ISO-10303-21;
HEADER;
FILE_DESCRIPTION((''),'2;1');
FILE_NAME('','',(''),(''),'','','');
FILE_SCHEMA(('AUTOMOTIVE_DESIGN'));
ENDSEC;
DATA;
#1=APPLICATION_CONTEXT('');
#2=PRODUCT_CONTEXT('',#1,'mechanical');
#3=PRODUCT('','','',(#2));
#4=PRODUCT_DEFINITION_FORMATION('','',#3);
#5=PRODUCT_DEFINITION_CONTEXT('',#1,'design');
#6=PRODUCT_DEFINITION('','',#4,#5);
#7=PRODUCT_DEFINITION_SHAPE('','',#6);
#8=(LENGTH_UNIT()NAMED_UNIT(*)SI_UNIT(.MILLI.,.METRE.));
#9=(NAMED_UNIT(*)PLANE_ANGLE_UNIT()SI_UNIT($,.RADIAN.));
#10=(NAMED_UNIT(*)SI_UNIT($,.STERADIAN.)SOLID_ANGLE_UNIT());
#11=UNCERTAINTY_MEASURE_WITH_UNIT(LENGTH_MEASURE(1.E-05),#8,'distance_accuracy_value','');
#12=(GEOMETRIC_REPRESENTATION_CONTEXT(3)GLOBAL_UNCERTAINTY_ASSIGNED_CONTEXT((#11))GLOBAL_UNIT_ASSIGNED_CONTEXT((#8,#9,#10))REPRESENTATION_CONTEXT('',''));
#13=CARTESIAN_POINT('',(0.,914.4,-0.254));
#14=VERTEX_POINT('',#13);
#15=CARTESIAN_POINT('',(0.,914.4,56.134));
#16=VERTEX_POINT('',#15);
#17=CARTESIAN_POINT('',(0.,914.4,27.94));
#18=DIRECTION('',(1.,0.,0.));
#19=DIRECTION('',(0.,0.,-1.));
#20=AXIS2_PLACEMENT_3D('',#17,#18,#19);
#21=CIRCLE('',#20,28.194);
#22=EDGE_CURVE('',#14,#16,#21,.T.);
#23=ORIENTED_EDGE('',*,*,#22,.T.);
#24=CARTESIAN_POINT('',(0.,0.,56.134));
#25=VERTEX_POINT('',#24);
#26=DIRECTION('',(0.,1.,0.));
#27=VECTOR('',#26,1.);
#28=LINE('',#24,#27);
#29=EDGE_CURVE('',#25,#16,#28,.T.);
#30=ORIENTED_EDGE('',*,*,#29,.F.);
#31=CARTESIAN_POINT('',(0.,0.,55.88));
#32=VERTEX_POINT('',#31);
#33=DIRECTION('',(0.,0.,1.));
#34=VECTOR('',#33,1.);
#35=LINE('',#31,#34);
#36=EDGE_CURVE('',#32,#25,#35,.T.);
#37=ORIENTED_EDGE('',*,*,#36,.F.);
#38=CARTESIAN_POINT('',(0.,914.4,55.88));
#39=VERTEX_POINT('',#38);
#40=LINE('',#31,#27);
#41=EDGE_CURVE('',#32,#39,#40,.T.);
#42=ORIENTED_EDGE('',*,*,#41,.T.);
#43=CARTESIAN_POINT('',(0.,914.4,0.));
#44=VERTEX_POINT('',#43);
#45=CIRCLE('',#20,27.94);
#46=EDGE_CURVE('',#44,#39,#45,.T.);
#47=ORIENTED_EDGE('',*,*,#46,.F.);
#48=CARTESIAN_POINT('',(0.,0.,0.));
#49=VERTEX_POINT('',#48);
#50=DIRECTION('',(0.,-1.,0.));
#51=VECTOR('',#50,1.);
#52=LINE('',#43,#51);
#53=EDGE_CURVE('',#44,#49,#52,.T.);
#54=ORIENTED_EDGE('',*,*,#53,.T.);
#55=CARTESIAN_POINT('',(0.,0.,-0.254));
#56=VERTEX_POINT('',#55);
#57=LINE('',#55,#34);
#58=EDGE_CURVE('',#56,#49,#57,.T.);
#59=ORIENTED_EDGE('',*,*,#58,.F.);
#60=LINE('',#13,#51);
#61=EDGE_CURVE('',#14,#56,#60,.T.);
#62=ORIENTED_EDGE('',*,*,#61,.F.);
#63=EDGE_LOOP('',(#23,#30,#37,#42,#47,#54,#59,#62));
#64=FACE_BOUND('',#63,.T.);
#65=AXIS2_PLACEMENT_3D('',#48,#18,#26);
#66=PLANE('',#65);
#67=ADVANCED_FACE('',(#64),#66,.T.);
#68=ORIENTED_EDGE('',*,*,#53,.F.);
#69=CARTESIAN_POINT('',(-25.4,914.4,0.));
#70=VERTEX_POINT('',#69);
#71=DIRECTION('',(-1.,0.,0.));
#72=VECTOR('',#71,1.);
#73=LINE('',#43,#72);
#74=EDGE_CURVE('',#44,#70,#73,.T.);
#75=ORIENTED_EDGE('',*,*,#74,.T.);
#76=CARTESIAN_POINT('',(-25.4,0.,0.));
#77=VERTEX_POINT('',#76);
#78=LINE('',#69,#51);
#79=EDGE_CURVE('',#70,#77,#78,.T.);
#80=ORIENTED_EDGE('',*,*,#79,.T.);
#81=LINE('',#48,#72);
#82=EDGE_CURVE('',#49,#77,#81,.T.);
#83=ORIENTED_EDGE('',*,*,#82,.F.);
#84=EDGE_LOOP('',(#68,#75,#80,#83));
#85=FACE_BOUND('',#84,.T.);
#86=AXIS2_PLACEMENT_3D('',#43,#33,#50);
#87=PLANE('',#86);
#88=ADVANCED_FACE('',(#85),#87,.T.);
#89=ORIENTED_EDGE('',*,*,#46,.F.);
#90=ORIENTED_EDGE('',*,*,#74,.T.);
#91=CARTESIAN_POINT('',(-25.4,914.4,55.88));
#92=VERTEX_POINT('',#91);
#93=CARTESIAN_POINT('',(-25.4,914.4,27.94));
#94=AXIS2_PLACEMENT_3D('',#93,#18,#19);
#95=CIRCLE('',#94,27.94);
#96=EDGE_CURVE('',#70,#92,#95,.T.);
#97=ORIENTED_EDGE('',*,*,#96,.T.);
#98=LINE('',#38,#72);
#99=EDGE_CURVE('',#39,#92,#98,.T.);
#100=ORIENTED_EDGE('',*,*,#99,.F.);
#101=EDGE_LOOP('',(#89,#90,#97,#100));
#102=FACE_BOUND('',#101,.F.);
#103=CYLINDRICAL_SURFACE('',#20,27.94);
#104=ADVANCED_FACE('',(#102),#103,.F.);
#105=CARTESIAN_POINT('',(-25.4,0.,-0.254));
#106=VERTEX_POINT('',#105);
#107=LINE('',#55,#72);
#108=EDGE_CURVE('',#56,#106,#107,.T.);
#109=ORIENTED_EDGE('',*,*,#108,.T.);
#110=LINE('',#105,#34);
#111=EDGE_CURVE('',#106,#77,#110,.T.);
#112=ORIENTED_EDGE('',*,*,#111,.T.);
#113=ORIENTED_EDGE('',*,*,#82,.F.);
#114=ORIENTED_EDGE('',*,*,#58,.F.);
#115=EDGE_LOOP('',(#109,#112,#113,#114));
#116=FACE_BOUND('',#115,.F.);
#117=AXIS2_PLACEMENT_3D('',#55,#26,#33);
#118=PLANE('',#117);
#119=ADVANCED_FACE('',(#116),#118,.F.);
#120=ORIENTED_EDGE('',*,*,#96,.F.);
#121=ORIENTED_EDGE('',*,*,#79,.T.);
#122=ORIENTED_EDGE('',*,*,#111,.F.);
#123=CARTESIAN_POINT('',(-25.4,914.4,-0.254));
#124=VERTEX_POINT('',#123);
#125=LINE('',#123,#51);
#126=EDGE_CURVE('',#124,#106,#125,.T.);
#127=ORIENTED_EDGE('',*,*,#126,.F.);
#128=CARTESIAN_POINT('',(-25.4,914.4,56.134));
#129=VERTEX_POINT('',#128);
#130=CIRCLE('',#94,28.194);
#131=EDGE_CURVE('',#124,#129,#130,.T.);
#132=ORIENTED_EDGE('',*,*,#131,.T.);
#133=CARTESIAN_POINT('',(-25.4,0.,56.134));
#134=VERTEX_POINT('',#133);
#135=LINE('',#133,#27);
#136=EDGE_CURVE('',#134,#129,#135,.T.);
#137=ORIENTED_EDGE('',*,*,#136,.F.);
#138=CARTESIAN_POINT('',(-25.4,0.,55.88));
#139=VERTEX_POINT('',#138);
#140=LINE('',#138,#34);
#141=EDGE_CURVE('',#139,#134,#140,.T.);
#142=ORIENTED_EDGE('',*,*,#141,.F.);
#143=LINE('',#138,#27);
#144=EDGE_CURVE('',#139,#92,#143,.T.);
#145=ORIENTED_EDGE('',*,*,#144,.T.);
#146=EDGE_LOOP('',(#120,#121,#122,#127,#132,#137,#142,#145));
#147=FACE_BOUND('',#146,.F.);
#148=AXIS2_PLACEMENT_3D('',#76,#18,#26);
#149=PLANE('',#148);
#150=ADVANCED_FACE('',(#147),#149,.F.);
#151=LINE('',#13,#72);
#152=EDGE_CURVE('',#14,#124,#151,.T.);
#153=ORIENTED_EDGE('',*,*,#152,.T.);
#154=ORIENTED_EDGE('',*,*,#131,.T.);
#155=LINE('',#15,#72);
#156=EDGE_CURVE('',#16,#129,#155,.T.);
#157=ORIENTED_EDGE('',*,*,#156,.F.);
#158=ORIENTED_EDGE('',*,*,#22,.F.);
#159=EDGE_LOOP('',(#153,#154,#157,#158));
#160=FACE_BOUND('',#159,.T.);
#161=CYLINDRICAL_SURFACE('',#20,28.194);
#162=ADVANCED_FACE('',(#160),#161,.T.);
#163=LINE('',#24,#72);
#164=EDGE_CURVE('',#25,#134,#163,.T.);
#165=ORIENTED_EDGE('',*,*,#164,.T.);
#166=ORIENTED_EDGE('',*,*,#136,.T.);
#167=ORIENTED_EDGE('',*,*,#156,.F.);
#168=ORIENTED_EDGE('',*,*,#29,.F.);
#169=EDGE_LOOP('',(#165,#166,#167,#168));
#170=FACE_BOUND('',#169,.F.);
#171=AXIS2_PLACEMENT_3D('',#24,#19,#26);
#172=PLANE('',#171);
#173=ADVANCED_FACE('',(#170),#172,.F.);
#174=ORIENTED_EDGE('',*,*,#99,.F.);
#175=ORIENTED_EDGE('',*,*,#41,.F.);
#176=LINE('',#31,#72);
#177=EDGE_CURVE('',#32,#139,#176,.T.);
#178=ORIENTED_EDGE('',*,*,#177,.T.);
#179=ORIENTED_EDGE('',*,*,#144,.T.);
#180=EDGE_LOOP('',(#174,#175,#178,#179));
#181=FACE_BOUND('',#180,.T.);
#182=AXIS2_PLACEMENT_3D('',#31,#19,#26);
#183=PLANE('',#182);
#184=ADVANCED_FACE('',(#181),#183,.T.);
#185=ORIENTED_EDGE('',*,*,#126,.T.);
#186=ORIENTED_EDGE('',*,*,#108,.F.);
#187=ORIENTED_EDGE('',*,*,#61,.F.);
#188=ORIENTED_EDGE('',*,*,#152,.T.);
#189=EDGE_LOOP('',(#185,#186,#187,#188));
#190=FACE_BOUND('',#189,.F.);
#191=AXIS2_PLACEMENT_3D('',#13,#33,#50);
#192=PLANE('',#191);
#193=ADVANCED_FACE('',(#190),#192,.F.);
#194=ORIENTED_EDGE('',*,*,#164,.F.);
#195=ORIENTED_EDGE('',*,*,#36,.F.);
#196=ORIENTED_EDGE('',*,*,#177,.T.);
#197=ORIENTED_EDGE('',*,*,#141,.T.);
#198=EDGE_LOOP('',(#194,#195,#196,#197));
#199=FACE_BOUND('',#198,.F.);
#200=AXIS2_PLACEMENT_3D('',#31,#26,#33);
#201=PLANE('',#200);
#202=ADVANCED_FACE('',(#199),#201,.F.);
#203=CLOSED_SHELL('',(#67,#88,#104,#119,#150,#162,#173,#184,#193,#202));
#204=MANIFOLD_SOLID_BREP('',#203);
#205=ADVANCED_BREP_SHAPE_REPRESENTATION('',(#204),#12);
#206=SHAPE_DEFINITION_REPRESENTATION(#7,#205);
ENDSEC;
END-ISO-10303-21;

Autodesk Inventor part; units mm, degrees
ref_plane "YZ Plane" through (0, 0, 0) normal (1, 0, 0) x (0, 1, 0)
ref_plane "XZ Plane" through (0, 0, 0) normal (0, 1, 0) x (-1, 0, 0)
ref_plane "XY Plane" through (0, 0, 0) normal (0, 0, 1) x (1, 0, 0)
sketch "Sketch1" plane through (0, 0, 0) normal (1, 0, 0) x (0, 1, 0)
  line L0 (0, 55.88) -> (914.4, 55.88)
  arc A0 (914.4, 0) -> (914.4, 55.88) centre (914.4, 27.94) ccw
  line L1 (914.4, 0) -> (0, 0)
  line L2 (0, 56.134) -> (914.4, 56.134)
  arc A1 (914.4, -0.254) -> (914.4, 56.134) centre (914.4, 27.94) ccw
  line L3 (914.4, -0.254) -> (0, -0.254)
  line L4 (0, 55.88) -> (0, 56.134)
  line L5 (0, -0.254) -> (0, 0)
  dimension "d6" = 27.94
  dimension "d7" = 914.4
  dimension "d12" = 0.254
extrude "Extrusion2" add sketch "Sketch1" against normal blind 25.4
properties part number "guide"
